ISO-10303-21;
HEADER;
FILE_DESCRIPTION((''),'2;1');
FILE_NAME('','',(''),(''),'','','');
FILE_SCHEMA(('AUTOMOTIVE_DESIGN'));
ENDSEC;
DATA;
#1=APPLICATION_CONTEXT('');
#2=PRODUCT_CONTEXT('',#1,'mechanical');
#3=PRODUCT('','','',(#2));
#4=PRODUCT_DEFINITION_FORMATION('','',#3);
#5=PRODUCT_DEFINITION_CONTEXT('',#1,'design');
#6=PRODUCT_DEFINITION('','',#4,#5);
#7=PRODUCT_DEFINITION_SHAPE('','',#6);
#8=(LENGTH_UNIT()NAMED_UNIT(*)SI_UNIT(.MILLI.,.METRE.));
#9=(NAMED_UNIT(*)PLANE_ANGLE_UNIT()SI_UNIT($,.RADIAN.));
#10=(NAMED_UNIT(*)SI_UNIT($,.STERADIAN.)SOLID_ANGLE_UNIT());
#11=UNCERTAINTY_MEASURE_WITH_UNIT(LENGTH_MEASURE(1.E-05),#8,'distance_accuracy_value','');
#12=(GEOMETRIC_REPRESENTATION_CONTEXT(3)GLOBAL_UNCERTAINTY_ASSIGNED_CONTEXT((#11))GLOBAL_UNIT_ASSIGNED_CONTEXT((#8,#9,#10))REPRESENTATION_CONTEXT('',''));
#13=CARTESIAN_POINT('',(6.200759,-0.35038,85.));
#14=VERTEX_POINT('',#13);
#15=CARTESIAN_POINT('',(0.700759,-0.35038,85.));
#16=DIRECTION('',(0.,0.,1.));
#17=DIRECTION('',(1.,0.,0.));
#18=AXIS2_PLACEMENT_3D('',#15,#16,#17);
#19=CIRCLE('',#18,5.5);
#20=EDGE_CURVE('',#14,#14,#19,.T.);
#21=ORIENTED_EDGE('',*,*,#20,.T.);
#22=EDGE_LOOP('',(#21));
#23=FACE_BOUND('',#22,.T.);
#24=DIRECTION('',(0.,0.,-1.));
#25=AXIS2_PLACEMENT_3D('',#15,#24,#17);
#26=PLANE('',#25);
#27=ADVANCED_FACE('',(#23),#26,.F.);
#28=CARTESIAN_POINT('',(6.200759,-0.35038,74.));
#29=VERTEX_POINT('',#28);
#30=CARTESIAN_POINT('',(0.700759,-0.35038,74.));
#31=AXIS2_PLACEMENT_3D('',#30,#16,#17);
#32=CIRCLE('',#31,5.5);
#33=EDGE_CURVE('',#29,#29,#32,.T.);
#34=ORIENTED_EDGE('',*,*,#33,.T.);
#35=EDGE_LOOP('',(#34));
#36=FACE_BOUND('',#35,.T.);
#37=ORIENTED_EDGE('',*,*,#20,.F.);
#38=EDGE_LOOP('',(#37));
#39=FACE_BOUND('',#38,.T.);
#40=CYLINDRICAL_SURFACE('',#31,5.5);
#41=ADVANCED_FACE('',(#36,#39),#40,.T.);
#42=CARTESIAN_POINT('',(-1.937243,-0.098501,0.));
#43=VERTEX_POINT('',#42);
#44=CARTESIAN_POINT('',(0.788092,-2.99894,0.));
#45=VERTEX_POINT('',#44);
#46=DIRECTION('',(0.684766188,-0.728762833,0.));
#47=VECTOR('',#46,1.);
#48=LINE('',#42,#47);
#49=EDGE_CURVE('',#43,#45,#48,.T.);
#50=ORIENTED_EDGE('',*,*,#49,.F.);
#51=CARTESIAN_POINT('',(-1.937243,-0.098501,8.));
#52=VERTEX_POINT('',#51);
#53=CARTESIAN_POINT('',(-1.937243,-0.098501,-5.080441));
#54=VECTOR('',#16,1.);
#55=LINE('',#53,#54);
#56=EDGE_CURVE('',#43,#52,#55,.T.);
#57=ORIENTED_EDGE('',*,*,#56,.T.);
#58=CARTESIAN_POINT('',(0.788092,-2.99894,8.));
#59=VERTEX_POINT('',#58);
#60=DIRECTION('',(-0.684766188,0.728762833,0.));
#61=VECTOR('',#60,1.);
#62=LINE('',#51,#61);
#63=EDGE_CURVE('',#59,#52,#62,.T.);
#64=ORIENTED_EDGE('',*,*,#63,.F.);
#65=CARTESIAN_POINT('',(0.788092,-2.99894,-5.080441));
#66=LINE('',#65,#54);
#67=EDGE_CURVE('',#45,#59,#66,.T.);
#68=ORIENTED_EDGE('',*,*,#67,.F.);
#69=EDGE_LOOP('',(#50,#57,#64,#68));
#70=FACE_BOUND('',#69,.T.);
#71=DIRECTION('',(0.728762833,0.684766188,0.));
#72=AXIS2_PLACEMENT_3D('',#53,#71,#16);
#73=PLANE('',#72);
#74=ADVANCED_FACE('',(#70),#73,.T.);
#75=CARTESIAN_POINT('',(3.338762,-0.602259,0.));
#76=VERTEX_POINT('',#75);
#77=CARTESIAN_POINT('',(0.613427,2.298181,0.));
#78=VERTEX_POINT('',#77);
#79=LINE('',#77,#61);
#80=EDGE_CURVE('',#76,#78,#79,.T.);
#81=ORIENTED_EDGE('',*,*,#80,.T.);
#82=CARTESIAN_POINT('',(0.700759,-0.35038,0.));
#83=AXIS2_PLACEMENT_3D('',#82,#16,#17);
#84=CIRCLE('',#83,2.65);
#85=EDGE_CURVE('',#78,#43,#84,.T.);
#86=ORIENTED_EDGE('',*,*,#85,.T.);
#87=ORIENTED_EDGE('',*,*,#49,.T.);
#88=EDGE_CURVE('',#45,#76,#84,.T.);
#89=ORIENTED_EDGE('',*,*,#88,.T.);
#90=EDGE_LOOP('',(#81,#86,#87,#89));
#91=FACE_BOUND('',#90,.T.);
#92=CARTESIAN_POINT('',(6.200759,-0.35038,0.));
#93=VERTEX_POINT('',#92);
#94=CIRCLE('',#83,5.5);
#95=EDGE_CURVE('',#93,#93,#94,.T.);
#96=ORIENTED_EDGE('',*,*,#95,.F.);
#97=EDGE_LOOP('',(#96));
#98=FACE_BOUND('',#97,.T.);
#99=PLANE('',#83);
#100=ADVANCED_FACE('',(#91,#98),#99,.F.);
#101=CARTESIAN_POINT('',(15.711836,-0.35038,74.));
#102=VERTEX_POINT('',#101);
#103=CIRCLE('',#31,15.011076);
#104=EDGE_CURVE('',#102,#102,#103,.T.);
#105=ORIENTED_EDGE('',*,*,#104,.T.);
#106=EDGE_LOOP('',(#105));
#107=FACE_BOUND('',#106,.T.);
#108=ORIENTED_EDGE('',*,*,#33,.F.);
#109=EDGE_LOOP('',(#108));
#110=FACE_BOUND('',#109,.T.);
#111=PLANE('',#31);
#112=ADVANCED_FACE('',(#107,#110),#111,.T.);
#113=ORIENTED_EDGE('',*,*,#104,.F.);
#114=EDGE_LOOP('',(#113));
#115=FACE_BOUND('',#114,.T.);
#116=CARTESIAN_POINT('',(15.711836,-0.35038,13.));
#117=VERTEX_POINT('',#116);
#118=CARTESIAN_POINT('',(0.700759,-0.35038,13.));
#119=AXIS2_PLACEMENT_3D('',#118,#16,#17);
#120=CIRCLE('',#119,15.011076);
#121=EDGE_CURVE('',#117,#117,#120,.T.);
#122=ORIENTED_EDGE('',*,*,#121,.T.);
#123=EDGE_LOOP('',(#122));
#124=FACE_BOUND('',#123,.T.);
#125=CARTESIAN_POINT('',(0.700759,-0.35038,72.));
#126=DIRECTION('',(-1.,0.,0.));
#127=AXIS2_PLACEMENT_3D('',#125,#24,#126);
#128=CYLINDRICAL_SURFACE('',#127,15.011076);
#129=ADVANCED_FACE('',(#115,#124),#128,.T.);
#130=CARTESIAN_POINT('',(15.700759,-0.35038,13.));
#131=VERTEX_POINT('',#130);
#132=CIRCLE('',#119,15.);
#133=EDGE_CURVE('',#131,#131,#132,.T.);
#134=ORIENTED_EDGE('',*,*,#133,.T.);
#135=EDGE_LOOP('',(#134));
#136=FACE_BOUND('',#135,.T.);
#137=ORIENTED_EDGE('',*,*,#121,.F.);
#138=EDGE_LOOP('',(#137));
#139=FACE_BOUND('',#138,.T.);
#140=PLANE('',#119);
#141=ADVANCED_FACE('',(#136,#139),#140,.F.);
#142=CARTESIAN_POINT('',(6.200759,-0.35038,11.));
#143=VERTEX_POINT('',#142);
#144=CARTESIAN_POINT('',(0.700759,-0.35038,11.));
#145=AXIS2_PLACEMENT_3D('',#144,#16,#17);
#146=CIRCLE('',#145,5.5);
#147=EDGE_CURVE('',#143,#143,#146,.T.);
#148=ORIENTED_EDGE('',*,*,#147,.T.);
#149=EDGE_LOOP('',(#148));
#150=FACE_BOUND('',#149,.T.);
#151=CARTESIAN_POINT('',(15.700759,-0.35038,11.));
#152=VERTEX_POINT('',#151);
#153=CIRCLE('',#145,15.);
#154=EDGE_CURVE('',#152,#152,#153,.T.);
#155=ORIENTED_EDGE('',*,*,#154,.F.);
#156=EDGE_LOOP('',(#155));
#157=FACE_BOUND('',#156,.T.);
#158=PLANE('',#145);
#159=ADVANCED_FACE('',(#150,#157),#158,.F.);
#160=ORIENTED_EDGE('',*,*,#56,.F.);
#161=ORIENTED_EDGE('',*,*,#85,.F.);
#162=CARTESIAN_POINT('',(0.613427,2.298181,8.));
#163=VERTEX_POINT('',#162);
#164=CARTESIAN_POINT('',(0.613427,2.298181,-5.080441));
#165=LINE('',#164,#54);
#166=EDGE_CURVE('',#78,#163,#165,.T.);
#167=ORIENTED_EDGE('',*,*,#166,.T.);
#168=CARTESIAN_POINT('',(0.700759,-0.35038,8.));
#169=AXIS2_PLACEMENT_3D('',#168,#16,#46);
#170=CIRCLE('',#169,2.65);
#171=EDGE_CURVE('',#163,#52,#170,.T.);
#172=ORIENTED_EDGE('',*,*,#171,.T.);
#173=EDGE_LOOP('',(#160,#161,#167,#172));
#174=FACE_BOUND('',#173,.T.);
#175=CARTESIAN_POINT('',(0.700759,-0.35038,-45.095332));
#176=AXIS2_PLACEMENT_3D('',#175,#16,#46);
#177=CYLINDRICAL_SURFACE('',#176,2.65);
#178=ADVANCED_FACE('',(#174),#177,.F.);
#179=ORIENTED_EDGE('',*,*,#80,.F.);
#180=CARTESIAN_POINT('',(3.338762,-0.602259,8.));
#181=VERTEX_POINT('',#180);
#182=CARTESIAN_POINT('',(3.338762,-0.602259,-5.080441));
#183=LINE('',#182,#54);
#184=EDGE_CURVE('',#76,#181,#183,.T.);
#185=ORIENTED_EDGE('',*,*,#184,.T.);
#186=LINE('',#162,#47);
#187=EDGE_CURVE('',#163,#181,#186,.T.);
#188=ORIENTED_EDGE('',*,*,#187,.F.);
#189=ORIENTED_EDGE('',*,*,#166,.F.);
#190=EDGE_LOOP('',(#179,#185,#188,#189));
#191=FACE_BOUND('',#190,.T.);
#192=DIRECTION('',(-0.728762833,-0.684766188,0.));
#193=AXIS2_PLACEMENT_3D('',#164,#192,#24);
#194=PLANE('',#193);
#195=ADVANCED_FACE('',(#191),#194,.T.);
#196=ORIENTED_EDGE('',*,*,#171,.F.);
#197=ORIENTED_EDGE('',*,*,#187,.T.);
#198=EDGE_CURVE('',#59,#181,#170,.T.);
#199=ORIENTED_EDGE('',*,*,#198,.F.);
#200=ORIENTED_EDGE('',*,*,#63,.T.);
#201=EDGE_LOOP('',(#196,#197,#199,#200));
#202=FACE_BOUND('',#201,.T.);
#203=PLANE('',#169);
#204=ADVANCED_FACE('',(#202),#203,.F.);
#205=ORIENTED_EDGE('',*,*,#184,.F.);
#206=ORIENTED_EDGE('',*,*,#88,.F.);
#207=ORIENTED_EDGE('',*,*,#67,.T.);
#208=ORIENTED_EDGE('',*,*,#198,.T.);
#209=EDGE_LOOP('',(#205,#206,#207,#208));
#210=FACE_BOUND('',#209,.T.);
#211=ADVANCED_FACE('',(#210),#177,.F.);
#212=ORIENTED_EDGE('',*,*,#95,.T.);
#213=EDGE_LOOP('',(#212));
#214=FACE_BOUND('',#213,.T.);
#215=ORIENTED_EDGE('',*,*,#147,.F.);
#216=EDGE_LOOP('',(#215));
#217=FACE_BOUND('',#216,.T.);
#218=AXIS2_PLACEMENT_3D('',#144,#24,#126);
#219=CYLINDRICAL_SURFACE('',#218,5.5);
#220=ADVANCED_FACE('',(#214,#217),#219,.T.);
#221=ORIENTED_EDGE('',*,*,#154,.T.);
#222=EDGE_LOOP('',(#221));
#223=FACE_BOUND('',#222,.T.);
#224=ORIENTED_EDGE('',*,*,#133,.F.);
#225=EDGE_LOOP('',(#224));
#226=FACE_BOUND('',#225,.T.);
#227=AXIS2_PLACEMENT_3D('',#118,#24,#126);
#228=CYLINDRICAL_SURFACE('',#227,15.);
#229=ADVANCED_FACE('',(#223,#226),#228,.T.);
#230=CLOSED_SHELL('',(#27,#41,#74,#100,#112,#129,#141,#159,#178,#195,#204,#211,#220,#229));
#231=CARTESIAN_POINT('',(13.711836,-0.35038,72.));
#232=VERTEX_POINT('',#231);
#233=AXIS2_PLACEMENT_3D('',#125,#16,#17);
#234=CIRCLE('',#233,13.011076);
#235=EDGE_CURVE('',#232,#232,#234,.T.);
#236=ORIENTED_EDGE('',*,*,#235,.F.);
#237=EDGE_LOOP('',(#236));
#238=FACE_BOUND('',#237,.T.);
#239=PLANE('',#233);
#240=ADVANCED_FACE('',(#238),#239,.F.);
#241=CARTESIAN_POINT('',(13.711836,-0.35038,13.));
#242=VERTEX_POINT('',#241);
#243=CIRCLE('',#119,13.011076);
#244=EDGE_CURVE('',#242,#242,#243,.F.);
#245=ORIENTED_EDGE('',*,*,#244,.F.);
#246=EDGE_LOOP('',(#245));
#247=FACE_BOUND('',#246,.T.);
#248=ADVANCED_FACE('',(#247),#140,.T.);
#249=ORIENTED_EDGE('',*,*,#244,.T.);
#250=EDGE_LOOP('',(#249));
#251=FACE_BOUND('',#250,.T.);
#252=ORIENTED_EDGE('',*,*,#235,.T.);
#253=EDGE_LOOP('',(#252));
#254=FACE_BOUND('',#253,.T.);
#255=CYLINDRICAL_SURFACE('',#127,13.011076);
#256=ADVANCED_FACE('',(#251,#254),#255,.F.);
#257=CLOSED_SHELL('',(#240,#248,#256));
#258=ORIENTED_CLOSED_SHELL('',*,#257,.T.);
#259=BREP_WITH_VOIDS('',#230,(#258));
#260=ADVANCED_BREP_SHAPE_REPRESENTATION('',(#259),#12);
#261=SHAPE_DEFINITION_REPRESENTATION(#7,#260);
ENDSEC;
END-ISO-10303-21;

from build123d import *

# Parameters (mm, degrees)
SKETCH1_R           = 5.5
BOSS_EXTRUDE1_DEPTH = 11
SKETCH3_R           = 15
BOSS_EXTRUDE2_DEPTH = 2
SKETCH4_R           = 15.011076053
SKETCH4_R_2         = 13.011076053
BOSS_EXTRUDE3_DEPTH = 59
SKETCH5_R           = 15.011076053
BOSS_EXTRUDE4_DEPTH = 2
CAVITY1_OUTLINE_R   = 1.25
CAVITY1_DEPTH       = 8
SKETCH6_R           = 1.25
CUT_EXTRUDE1_DEPTH  = 8


# Read off the part's stored shape, not the designer's step: Cavity1
with BuildPart() as part:
    # Sketch1 → Boss-Extrude1 (new body)
    with BuildSketch(Plane.XY):
        with Locations((0.700759494, -0.350379747)):
            Circle(SKETCH1_R)
    boss_extrude1 = extrude(amount=BOSS_EXTRUDE1_DEPTH)

    # Sketch3 → Boss-Extrude2 (add)
    with BuildSketch(Plane.XY.offset(11)):
        with Locations((0.700759494, -0.350379747)):
            Circle(SKETCH3_R)
    extrude(amount=BOSS_EXTRUDE2_DEPTH)

    # Sketch4 → Boss-Extrude3 (add)
    with BuildSketch(Plane.XY.offset(13)):
        with Locations((0.700759494, -0.350379747)):
            Circle(SKETCH4_R)
        with Locations((0.700759494, -0.350379747)):
            Circle(SKETCH4_R_2, mode=Mode.SUBTRACT)
    extrude(amount=BOSS_EXTRUDE3_DEPTH)

    # Sketch5 → Boss-Extrude4 (add)
    with BuildSketch(Plane.XY.offset(72)):
        with Locations((0.700759494, -0.350379747)):
            Circle(SKETCH5_R)
    extrude(amount=BOSS_EXTRUDE4_DEPTH)

    # Mirror1: Boss-Extrude1 across plane
    add(boss_extrude1.mirror(Plane.XY.offset(42.5)))

    # Cavity1 outline → Cavity1 (cut)
    with BuildSketch(Plane.XY):
        with BuildLine():
            Line((3.338761962, -0.602258645), (0.613426942, 2.29818081))
            ThreePointArc((0.613426942, 2.29818081), (-1.113870906, 1.580841761), (-1.937242974, -0.098500849))
            Line((-1.937242974, -0.098500849), (0.788092045, -2.998940304))
            ThreePointArc((0.788092045, -2.998940304), (2.515389893, -2.281601255), (3.338761962, -0.602258645))
        make_face()
        with Locations((0.700759494, -0.350379747)):
            Circle(CAVITY1_OUTLINE_R, mode=Mode.SUBTRACT)
    extrude(amount=CAVITY1_DEPTH, mode=Mode.SUBTRACT)

    # Sketch6 → Cut-Extrude1 (cut)
    with BuildSketch(Plane(origin=(0, 0, 0), x_dir=(-1, 0, 0), z_dir=(0, 0, -1))):
        with Locations((-0.700759494, -0.350379747)):
            Circle(SKETCH6_R)
    extrude(amount=-CUT_EXTRUDE1_DEPTH, mode=Mode.SUBTRACT)


solid = part.part
